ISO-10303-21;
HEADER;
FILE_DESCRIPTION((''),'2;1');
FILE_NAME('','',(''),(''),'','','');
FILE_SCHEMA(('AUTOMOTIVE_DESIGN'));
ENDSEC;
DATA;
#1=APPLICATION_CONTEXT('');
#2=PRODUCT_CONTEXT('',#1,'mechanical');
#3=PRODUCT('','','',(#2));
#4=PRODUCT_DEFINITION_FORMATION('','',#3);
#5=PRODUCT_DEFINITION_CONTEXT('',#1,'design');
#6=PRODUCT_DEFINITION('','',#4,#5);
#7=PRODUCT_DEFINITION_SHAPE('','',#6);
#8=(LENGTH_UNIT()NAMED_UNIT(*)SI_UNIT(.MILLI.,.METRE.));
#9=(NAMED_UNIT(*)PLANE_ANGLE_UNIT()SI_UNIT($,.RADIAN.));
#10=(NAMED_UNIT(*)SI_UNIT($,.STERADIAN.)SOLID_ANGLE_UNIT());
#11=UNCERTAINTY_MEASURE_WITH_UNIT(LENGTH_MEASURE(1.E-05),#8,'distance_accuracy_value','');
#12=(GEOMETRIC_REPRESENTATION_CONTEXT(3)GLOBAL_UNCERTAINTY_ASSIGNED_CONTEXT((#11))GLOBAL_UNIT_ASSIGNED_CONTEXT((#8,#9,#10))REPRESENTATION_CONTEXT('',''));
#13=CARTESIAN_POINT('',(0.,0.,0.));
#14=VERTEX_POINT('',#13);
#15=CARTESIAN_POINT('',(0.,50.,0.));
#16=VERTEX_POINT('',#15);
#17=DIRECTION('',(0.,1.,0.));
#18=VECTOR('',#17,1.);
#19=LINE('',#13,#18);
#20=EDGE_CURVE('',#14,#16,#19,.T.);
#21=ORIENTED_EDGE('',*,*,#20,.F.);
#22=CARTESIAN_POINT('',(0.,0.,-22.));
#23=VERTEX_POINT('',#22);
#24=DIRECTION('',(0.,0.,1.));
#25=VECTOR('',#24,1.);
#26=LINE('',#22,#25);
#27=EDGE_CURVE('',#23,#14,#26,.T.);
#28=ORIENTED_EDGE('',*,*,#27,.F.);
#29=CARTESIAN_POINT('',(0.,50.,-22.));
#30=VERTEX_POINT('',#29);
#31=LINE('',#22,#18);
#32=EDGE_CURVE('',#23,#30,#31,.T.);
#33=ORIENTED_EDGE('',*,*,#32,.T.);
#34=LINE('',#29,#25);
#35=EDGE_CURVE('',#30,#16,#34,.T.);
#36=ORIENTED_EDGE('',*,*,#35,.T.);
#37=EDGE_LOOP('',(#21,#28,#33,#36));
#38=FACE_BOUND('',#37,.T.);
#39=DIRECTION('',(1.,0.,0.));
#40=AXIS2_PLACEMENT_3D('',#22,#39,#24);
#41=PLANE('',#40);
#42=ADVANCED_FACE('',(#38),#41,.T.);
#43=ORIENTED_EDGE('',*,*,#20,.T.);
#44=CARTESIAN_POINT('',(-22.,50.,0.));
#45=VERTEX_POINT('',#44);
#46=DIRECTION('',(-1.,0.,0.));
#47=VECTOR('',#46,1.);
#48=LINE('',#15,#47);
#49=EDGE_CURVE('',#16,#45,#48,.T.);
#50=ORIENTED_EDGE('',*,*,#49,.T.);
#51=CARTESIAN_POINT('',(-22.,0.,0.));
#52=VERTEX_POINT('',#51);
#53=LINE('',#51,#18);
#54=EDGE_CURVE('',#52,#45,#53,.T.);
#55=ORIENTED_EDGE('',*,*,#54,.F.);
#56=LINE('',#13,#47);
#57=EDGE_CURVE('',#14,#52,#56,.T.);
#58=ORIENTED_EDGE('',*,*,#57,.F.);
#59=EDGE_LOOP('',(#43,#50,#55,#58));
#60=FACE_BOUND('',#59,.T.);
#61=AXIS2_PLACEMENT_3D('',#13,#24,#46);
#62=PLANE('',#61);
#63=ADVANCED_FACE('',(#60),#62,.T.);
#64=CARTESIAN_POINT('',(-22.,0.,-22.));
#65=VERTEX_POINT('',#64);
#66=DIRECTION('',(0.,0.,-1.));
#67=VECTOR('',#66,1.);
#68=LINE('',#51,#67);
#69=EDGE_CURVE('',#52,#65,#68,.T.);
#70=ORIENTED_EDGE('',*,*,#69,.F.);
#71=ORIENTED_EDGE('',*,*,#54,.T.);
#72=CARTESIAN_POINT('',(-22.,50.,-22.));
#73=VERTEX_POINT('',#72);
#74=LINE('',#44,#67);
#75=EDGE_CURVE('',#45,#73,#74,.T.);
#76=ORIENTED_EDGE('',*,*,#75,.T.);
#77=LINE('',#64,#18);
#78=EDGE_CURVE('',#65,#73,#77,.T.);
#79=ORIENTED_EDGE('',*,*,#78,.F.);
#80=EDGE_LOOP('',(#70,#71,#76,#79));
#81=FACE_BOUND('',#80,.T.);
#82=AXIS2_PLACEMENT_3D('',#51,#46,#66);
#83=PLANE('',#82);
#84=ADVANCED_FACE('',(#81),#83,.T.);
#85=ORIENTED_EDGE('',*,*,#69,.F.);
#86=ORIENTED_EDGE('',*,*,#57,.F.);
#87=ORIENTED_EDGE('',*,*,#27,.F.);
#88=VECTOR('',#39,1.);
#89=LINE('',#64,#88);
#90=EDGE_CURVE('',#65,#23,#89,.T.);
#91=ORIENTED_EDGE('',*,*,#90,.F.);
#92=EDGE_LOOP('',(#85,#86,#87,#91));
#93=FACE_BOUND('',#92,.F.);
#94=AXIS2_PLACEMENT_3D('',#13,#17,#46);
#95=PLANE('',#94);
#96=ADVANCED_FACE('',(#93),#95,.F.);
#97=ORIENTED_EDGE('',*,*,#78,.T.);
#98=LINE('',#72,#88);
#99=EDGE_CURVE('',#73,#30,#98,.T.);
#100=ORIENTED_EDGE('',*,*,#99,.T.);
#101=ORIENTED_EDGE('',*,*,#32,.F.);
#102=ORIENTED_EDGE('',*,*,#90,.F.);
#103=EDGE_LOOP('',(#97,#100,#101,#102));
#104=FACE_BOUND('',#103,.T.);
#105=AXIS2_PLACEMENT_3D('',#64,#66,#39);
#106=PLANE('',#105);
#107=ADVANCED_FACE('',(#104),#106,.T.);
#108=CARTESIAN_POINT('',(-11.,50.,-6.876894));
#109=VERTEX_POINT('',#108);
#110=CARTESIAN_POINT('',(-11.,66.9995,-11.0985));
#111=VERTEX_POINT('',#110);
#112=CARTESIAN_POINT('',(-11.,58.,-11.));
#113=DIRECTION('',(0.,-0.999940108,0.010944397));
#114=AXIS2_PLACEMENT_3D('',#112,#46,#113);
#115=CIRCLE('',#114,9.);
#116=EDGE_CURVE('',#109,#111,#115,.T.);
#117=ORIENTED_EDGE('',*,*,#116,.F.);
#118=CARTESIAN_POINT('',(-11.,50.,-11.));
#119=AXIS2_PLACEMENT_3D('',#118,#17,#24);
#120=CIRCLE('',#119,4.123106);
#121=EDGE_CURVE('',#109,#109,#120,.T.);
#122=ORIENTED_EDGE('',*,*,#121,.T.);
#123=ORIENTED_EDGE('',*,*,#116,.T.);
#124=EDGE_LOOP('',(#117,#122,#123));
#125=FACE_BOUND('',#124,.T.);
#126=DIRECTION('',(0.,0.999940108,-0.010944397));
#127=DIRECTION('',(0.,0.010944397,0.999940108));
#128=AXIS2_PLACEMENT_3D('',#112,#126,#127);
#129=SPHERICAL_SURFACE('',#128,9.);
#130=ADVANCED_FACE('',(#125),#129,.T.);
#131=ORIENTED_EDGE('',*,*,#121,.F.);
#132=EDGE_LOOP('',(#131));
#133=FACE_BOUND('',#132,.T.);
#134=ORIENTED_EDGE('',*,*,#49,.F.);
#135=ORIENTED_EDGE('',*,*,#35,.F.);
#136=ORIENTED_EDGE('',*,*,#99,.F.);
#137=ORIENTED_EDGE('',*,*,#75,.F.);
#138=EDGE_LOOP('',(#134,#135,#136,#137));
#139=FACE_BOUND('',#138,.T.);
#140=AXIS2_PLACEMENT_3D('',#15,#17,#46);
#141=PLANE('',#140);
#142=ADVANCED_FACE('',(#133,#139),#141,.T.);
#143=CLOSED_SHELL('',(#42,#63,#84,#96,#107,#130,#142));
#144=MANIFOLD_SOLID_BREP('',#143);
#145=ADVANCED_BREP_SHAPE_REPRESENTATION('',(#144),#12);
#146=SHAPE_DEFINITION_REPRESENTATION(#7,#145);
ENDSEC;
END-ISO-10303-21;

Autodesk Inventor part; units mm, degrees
ref_plane "YZ Plane" through (0, 0, 0) normal (1, 0, 0) x (0, 1, 0)
ref_plane "XZ Plane" through (0, 0, 0) normal (0, 1, 0) x (-1, 0, 0)
ref_plane "XY Plane" through (0, 0, 0) normal (0, 0, 1) x (1, 0, 0)
sketch "Sketch6" plane through (0, 0, 0) normal (0, 1, 0) x (-1, 0, 0)
  line L0 (0, 0) -> (22, 0)
  line L1 (22, 0) -> (22, -22)
  line L2 (22, -22) -> (0, -22)
  line L3 (0, -22) -> (0, 0)
  dimension "d18" = 22
  dimension "d19" = 22
extrude "Extrusion3" add sketch "Sketch6" along normal blind 50
ref_plane "Work Plane1" through (-11, 0, -22) normal (-1, 0, 0) x (0, 0, 1)
sketch "Sketch8" plane through (-11, 0, -22) normal (-1, 0, 0) x (0, 0, 1)
  line L0 (0, 50) -> (22, 50) projected
  line L1 (11, 50) -> (11, 58)
  circle A0 centre (11, 58) radius 9
  line L2 (11.0985, 49.0005) -> (10.9015, 66.9995)
  point P0 (22, 0)
  dimension "d30" = 8
  dimension "d31" = 18
revolve "Revolution2" add sketch "Sketch8" angle 360 about axis through (-11, 49.0005, -10.9015) along (0, 0.9999401, -0.0109435) picked at (12.4036, 52.6667) picked at (13.3498, 49.8198) contours A0 L0 L2 | L2 L0 A0
properties part number "queen"
